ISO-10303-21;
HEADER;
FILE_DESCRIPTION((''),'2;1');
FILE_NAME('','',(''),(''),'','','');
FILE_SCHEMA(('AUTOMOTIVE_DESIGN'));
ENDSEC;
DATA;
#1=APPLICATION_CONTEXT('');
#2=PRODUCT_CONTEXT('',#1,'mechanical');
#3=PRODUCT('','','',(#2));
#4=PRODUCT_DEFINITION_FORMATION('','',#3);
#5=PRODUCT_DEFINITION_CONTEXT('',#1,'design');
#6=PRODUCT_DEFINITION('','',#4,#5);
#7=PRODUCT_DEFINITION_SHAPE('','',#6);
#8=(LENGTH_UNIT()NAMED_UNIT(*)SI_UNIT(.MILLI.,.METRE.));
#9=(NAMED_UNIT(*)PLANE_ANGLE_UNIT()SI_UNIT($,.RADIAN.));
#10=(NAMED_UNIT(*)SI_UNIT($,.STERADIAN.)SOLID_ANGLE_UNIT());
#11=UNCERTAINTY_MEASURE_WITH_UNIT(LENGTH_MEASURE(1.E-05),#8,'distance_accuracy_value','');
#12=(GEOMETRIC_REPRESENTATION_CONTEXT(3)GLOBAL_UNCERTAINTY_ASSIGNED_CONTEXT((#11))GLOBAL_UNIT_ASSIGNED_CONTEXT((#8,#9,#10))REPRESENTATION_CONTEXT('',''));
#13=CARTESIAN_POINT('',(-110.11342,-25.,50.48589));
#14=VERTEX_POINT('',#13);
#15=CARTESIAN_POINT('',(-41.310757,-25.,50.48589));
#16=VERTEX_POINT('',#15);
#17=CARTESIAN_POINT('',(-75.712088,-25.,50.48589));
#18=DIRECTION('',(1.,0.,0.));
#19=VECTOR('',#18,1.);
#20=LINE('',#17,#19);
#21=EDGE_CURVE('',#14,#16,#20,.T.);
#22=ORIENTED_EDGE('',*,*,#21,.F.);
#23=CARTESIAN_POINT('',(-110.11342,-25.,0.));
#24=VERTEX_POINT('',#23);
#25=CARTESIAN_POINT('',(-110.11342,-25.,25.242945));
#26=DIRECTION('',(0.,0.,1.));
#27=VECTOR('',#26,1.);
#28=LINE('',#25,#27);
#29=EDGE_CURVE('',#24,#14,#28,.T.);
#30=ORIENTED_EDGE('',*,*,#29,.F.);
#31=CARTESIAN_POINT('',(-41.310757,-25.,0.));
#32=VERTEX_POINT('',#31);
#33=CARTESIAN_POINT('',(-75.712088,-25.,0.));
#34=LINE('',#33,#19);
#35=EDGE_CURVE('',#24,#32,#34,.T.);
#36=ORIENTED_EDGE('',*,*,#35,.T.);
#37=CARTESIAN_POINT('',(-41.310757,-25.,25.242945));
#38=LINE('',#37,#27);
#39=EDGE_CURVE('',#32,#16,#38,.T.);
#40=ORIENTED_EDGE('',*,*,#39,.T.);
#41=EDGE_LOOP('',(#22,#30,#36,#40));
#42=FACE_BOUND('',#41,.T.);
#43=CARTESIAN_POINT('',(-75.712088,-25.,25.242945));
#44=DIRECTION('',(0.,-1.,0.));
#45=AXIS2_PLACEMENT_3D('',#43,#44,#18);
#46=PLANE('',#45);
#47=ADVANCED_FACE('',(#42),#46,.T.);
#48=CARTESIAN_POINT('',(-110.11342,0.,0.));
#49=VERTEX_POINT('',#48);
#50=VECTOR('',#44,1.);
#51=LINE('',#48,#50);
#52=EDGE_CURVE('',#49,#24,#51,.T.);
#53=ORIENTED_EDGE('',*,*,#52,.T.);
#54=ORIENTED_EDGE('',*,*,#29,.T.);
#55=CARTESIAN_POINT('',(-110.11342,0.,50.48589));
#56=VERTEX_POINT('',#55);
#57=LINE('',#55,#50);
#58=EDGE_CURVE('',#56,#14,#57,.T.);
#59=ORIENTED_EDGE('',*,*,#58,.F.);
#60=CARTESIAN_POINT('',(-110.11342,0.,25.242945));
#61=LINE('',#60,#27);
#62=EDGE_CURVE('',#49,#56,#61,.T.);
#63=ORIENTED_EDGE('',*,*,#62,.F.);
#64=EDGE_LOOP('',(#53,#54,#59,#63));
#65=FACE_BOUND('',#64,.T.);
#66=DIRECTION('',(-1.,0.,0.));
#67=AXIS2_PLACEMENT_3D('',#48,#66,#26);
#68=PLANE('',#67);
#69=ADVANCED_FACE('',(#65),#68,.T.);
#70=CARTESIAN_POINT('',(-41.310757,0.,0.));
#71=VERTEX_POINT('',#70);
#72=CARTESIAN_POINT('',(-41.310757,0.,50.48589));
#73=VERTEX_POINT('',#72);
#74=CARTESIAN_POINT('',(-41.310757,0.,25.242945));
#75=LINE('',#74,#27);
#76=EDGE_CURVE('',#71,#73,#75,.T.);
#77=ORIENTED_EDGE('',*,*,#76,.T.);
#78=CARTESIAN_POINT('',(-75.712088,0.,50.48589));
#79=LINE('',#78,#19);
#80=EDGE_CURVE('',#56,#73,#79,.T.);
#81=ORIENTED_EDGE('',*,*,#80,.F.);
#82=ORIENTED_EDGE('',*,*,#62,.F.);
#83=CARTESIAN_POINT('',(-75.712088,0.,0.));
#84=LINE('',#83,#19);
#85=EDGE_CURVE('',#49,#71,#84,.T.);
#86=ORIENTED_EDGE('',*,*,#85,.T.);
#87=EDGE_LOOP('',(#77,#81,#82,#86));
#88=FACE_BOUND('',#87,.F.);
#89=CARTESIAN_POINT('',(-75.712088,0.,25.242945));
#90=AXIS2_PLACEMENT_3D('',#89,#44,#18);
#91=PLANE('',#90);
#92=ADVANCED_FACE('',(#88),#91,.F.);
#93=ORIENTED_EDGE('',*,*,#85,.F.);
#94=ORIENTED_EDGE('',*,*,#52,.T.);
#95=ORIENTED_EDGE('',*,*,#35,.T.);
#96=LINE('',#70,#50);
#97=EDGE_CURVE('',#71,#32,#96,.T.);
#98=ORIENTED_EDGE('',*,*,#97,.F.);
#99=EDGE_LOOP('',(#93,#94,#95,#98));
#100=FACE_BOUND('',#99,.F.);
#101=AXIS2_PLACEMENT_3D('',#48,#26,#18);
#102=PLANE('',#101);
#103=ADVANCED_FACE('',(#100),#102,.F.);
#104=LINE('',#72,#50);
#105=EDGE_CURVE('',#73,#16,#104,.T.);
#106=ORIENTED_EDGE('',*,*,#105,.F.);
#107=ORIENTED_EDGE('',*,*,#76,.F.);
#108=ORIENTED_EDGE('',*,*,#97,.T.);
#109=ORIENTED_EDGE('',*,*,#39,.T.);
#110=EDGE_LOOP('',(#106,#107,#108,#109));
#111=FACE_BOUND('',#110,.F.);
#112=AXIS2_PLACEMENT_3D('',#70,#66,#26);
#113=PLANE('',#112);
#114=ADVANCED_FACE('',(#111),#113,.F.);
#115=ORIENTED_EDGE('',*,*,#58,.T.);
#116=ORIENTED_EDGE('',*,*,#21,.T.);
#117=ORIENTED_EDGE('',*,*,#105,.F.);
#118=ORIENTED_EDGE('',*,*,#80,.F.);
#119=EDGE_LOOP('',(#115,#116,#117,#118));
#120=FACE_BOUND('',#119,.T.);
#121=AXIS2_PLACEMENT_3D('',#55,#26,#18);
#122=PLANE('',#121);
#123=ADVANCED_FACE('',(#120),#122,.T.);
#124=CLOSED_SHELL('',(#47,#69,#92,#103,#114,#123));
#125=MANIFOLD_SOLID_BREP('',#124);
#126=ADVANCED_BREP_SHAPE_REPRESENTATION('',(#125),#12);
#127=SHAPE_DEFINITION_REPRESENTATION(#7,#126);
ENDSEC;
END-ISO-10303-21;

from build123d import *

# Parameters (mm, degrees)
F1_W     = 68.8026621938
F1_H     = 50.4858903587
F2_DEPTH = 25


# Not quite as in the source:
# - a feature of the source that left no trace in its solid (it failed there, or was rolled back) is left out


with BuildPart() as f2:
    # F1 (on Front) → F2 (new body)
    with BuildSketch(Plane.XZ):
        with Locations((-75.7120884955, 25.2429451793)):
            Rectangle(F1_W, F1_H)
    extrude(amount=F2_DEPTH)


solid = f2.part
